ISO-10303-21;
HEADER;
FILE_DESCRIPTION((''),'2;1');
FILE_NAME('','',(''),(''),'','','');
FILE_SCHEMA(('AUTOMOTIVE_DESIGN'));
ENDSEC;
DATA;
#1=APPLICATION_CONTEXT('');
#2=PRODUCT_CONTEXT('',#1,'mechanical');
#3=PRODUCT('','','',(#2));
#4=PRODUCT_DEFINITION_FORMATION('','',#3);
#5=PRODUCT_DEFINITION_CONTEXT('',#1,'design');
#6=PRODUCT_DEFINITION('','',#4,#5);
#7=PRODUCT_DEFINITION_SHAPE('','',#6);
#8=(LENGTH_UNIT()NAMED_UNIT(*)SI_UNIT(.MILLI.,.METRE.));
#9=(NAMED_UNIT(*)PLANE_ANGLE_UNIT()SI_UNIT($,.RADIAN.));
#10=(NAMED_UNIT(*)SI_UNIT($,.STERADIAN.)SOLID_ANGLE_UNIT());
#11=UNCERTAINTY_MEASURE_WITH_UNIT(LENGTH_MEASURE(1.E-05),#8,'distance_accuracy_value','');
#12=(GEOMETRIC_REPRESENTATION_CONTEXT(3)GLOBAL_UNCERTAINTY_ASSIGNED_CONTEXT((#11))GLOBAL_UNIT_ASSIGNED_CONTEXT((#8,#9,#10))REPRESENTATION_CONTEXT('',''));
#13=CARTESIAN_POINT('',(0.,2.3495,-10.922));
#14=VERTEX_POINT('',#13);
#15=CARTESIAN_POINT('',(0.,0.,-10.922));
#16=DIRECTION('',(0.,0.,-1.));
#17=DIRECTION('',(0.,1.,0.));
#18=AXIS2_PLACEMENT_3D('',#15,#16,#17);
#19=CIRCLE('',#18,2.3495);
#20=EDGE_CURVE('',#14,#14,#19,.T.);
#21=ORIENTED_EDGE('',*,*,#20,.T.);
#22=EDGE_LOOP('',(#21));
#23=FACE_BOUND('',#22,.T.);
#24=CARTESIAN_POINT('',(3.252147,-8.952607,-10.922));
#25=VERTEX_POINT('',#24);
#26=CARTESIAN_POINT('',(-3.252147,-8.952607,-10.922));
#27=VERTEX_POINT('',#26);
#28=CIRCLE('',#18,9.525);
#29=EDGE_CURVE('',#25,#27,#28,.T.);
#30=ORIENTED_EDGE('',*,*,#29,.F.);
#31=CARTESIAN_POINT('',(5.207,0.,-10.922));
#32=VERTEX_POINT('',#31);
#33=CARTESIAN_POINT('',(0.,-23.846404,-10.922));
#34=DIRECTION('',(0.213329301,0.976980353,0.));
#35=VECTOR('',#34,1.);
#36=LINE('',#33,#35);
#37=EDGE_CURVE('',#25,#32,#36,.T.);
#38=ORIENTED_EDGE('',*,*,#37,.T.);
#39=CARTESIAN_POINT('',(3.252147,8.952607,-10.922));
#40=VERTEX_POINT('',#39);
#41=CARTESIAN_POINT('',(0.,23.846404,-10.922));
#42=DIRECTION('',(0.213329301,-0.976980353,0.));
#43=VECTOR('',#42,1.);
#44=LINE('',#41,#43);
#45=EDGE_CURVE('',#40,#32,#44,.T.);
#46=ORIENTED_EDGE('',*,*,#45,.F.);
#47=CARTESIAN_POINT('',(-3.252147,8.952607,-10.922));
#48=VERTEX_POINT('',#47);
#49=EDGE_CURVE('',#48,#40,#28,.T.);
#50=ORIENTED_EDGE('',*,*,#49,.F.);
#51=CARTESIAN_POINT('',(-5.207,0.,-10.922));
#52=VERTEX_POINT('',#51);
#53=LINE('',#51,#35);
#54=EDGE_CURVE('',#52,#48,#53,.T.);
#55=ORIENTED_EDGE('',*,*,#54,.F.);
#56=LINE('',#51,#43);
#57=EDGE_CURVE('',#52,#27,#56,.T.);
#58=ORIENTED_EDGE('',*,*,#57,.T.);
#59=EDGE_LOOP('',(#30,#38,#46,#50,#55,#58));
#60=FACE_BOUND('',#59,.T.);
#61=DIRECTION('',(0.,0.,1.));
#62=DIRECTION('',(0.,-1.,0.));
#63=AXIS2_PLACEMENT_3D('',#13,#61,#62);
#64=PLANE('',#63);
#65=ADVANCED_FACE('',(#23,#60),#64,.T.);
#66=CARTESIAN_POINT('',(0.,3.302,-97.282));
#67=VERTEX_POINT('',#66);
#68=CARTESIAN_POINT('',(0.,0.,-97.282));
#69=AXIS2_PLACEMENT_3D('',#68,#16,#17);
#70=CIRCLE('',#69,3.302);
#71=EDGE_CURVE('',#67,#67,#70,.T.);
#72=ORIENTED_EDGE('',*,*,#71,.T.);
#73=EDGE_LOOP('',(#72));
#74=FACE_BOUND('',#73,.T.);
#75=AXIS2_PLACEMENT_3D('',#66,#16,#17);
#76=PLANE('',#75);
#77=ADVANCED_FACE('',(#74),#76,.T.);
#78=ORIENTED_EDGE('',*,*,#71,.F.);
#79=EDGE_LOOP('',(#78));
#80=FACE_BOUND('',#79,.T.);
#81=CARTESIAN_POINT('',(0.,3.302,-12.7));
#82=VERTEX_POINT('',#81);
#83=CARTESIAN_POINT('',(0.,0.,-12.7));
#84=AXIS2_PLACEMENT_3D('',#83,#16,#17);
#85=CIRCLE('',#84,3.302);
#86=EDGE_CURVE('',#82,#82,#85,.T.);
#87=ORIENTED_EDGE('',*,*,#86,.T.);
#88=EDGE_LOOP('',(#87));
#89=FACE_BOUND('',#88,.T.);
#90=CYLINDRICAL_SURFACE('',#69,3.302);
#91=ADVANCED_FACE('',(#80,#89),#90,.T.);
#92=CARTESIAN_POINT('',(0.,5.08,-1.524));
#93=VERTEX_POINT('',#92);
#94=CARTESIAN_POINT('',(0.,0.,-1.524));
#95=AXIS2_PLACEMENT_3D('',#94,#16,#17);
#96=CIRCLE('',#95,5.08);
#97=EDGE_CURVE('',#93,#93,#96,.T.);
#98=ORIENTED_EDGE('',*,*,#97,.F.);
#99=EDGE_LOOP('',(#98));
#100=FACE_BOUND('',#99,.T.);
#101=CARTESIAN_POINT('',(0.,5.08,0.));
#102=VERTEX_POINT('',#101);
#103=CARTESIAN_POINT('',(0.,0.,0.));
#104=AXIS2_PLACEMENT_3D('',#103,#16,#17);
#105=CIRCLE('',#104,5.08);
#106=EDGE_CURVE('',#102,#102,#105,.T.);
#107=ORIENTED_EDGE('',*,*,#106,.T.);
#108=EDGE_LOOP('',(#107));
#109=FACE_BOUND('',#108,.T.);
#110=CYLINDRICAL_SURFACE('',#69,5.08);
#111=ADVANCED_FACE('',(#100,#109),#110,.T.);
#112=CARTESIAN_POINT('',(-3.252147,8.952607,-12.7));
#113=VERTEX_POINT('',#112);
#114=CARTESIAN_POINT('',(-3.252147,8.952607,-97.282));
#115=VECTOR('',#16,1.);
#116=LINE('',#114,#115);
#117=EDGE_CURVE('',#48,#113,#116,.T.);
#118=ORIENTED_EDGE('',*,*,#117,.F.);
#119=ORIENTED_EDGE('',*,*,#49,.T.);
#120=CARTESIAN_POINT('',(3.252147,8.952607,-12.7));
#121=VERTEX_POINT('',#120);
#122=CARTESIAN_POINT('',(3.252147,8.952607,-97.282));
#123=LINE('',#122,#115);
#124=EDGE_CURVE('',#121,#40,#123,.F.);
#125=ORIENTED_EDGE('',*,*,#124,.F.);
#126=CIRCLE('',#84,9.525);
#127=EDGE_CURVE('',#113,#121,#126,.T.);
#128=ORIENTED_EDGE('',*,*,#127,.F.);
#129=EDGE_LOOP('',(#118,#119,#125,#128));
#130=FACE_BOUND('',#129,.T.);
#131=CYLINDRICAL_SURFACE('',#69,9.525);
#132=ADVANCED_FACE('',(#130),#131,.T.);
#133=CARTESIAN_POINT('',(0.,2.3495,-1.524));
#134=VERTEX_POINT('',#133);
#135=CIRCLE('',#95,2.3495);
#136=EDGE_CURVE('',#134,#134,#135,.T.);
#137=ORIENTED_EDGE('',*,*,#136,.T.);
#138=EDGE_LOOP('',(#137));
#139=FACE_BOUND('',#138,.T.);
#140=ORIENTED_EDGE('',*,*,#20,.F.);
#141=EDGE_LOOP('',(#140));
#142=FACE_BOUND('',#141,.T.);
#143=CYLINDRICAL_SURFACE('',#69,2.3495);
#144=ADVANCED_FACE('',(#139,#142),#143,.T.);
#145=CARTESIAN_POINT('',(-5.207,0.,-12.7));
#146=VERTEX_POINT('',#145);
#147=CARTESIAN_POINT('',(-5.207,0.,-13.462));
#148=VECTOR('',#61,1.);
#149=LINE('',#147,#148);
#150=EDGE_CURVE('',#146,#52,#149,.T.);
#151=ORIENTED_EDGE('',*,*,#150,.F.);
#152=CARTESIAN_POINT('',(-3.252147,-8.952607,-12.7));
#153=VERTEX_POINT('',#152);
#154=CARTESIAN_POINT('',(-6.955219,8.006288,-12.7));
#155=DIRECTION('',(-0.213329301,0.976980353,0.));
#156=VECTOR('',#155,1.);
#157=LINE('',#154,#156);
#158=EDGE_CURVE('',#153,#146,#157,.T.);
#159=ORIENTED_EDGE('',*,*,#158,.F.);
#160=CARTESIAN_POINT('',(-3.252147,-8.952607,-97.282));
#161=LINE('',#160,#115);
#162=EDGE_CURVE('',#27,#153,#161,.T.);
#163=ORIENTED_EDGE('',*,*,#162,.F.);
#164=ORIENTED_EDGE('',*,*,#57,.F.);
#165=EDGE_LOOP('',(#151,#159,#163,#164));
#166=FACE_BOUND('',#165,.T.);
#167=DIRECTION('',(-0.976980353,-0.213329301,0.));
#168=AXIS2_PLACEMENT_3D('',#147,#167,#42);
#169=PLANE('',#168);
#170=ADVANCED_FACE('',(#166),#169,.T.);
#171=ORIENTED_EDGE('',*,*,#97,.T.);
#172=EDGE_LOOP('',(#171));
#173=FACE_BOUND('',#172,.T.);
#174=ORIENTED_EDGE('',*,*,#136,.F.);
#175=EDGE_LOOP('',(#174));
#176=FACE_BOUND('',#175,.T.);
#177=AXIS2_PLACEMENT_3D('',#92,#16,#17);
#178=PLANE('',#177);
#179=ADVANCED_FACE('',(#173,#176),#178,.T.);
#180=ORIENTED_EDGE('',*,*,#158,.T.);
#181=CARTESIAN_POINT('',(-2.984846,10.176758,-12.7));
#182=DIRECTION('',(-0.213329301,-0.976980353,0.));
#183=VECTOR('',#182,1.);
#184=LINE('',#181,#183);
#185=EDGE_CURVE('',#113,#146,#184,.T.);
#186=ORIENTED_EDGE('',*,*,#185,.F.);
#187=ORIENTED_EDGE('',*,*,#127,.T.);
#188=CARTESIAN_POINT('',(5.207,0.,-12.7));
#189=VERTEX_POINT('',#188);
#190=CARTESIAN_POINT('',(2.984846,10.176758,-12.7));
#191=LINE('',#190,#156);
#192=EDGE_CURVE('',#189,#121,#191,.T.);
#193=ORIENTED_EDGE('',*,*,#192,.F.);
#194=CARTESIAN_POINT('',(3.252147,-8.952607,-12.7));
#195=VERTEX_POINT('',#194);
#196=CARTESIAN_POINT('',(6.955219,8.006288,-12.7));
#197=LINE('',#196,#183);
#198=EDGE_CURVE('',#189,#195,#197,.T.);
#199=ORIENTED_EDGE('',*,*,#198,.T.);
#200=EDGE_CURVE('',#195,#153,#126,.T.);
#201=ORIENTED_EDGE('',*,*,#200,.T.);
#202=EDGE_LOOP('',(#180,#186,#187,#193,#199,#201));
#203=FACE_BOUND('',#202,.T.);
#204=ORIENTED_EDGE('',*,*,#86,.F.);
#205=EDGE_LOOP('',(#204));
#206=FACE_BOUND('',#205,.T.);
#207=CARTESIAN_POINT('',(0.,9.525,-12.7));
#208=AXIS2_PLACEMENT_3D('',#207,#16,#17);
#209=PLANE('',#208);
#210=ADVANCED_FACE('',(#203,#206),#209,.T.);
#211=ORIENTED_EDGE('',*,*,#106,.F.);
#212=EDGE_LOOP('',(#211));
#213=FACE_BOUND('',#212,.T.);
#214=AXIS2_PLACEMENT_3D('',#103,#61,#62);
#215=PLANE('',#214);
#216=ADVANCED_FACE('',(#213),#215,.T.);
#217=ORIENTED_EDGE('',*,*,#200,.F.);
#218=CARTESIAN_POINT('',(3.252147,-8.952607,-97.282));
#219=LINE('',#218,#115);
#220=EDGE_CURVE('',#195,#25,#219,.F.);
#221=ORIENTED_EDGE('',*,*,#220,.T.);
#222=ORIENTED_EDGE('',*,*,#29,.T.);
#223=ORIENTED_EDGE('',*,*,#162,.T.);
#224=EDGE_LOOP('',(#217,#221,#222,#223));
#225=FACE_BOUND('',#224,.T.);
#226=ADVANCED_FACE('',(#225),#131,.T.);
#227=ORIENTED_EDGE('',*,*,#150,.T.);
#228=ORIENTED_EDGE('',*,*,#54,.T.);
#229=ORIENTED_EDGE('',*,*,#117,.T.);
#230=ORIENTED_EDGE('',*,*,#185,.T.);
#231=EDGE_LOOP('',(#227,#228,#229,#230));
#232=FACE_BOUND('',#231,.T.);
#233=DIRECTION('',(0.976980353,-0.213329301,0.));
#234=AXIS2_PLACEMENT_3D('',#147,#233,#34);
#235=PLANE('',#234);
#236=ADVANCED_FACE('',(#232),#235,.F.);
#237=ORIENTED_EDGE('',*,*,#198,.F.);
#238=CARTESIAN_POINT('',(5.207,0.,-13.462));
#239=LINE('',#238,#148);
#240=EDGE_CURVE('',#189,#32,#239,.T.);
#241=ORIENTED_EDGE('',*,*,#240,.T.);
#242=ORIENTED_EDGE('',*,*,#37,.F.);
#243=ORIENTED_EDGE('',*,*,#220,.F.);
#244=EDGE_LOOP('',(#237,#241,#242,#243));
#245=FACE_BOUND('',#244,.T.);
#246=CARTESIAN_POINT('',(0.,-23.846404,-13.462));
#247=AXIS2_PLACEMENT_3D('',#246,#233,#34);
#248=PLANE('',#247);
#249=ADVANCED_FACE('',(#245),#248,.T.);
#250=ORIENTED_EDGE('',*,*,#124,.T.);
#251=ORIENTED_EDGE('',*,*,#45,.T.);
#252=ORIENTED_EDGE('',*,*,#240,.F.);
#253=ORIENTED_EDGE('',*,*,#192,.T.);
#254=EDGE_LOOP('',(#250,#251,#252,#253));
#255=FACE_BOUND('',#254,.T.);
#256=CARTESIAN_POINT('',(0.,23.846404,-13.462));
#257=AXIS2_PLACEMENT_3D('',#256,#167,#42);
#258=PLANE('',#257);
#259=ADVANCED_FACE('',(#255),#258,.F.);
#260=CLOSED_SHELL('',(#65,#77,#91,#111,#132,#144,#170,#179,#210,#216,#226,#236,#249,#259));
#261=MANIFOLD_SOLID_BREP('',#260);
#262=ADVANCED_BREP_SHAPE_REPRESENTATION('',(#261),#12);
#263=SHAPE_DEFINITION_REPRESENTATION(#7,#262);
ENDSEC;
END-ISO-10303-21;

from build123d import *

# Parameters (mm, degrees)
CORTAR_EXTRUIR1_START = -1.778
CORTAR_EXTRUIR1_DEPTH = 1.778


# Read off the part's stored shape, not the designer's step: Cortar-Extruir1
with BuildPart() as part:
    # Croquis1 → Revolución1 (revolve)
    with BuildSketch(Plane(origin=(0, 0, 0), x_dir=(0, 0, -1), z_dir=(1, 0, 0))):
        Polygon((0, 0), (0, 5.08), (1.524, 5.08), (1.524, 2.3495), (10.922, 2.3495), (10.922, 9.525), (12.7, 9.525), (12.7, 3.302), (97.282, 3.302), (97.282, 0), align=None)
    revolve(axis=Axis((0, 0, -97.282), (0, 0, 1)))

    # Cortar-Extruir1 outline → Cortar-Extruir1 (cut)
    with BuildSketch(Plane.XY.offset(-10.922).offset(CORTAR_EXTRUIR1_START)):
        with BuildLine():
            Line((-3.25214663, -8.952606732), (-5.207, 0))
            Line((-5.207, 0), (-3.25214663, 8.952606732))
            ThreePointArc((-3.25214663, 8.952606732), (-9.525, 0), (-3.25214663, -8.952606732))
        make_face()
        with BuildLine():
            Line((5.207, 0), (3.25214663, -8.952606732))
            ThreePointArc((3.25214663, -8.952606732), (9.525, 0), (3.25214663, 8.952606732))
            Line((3.25214663, 8.952606732), (5.207, 0))
        make_face()
    extrude(amount=CORTAR_EXTRUIR1_DEPTH, mode=Mode.SUBTRACT)


solid = part.part
